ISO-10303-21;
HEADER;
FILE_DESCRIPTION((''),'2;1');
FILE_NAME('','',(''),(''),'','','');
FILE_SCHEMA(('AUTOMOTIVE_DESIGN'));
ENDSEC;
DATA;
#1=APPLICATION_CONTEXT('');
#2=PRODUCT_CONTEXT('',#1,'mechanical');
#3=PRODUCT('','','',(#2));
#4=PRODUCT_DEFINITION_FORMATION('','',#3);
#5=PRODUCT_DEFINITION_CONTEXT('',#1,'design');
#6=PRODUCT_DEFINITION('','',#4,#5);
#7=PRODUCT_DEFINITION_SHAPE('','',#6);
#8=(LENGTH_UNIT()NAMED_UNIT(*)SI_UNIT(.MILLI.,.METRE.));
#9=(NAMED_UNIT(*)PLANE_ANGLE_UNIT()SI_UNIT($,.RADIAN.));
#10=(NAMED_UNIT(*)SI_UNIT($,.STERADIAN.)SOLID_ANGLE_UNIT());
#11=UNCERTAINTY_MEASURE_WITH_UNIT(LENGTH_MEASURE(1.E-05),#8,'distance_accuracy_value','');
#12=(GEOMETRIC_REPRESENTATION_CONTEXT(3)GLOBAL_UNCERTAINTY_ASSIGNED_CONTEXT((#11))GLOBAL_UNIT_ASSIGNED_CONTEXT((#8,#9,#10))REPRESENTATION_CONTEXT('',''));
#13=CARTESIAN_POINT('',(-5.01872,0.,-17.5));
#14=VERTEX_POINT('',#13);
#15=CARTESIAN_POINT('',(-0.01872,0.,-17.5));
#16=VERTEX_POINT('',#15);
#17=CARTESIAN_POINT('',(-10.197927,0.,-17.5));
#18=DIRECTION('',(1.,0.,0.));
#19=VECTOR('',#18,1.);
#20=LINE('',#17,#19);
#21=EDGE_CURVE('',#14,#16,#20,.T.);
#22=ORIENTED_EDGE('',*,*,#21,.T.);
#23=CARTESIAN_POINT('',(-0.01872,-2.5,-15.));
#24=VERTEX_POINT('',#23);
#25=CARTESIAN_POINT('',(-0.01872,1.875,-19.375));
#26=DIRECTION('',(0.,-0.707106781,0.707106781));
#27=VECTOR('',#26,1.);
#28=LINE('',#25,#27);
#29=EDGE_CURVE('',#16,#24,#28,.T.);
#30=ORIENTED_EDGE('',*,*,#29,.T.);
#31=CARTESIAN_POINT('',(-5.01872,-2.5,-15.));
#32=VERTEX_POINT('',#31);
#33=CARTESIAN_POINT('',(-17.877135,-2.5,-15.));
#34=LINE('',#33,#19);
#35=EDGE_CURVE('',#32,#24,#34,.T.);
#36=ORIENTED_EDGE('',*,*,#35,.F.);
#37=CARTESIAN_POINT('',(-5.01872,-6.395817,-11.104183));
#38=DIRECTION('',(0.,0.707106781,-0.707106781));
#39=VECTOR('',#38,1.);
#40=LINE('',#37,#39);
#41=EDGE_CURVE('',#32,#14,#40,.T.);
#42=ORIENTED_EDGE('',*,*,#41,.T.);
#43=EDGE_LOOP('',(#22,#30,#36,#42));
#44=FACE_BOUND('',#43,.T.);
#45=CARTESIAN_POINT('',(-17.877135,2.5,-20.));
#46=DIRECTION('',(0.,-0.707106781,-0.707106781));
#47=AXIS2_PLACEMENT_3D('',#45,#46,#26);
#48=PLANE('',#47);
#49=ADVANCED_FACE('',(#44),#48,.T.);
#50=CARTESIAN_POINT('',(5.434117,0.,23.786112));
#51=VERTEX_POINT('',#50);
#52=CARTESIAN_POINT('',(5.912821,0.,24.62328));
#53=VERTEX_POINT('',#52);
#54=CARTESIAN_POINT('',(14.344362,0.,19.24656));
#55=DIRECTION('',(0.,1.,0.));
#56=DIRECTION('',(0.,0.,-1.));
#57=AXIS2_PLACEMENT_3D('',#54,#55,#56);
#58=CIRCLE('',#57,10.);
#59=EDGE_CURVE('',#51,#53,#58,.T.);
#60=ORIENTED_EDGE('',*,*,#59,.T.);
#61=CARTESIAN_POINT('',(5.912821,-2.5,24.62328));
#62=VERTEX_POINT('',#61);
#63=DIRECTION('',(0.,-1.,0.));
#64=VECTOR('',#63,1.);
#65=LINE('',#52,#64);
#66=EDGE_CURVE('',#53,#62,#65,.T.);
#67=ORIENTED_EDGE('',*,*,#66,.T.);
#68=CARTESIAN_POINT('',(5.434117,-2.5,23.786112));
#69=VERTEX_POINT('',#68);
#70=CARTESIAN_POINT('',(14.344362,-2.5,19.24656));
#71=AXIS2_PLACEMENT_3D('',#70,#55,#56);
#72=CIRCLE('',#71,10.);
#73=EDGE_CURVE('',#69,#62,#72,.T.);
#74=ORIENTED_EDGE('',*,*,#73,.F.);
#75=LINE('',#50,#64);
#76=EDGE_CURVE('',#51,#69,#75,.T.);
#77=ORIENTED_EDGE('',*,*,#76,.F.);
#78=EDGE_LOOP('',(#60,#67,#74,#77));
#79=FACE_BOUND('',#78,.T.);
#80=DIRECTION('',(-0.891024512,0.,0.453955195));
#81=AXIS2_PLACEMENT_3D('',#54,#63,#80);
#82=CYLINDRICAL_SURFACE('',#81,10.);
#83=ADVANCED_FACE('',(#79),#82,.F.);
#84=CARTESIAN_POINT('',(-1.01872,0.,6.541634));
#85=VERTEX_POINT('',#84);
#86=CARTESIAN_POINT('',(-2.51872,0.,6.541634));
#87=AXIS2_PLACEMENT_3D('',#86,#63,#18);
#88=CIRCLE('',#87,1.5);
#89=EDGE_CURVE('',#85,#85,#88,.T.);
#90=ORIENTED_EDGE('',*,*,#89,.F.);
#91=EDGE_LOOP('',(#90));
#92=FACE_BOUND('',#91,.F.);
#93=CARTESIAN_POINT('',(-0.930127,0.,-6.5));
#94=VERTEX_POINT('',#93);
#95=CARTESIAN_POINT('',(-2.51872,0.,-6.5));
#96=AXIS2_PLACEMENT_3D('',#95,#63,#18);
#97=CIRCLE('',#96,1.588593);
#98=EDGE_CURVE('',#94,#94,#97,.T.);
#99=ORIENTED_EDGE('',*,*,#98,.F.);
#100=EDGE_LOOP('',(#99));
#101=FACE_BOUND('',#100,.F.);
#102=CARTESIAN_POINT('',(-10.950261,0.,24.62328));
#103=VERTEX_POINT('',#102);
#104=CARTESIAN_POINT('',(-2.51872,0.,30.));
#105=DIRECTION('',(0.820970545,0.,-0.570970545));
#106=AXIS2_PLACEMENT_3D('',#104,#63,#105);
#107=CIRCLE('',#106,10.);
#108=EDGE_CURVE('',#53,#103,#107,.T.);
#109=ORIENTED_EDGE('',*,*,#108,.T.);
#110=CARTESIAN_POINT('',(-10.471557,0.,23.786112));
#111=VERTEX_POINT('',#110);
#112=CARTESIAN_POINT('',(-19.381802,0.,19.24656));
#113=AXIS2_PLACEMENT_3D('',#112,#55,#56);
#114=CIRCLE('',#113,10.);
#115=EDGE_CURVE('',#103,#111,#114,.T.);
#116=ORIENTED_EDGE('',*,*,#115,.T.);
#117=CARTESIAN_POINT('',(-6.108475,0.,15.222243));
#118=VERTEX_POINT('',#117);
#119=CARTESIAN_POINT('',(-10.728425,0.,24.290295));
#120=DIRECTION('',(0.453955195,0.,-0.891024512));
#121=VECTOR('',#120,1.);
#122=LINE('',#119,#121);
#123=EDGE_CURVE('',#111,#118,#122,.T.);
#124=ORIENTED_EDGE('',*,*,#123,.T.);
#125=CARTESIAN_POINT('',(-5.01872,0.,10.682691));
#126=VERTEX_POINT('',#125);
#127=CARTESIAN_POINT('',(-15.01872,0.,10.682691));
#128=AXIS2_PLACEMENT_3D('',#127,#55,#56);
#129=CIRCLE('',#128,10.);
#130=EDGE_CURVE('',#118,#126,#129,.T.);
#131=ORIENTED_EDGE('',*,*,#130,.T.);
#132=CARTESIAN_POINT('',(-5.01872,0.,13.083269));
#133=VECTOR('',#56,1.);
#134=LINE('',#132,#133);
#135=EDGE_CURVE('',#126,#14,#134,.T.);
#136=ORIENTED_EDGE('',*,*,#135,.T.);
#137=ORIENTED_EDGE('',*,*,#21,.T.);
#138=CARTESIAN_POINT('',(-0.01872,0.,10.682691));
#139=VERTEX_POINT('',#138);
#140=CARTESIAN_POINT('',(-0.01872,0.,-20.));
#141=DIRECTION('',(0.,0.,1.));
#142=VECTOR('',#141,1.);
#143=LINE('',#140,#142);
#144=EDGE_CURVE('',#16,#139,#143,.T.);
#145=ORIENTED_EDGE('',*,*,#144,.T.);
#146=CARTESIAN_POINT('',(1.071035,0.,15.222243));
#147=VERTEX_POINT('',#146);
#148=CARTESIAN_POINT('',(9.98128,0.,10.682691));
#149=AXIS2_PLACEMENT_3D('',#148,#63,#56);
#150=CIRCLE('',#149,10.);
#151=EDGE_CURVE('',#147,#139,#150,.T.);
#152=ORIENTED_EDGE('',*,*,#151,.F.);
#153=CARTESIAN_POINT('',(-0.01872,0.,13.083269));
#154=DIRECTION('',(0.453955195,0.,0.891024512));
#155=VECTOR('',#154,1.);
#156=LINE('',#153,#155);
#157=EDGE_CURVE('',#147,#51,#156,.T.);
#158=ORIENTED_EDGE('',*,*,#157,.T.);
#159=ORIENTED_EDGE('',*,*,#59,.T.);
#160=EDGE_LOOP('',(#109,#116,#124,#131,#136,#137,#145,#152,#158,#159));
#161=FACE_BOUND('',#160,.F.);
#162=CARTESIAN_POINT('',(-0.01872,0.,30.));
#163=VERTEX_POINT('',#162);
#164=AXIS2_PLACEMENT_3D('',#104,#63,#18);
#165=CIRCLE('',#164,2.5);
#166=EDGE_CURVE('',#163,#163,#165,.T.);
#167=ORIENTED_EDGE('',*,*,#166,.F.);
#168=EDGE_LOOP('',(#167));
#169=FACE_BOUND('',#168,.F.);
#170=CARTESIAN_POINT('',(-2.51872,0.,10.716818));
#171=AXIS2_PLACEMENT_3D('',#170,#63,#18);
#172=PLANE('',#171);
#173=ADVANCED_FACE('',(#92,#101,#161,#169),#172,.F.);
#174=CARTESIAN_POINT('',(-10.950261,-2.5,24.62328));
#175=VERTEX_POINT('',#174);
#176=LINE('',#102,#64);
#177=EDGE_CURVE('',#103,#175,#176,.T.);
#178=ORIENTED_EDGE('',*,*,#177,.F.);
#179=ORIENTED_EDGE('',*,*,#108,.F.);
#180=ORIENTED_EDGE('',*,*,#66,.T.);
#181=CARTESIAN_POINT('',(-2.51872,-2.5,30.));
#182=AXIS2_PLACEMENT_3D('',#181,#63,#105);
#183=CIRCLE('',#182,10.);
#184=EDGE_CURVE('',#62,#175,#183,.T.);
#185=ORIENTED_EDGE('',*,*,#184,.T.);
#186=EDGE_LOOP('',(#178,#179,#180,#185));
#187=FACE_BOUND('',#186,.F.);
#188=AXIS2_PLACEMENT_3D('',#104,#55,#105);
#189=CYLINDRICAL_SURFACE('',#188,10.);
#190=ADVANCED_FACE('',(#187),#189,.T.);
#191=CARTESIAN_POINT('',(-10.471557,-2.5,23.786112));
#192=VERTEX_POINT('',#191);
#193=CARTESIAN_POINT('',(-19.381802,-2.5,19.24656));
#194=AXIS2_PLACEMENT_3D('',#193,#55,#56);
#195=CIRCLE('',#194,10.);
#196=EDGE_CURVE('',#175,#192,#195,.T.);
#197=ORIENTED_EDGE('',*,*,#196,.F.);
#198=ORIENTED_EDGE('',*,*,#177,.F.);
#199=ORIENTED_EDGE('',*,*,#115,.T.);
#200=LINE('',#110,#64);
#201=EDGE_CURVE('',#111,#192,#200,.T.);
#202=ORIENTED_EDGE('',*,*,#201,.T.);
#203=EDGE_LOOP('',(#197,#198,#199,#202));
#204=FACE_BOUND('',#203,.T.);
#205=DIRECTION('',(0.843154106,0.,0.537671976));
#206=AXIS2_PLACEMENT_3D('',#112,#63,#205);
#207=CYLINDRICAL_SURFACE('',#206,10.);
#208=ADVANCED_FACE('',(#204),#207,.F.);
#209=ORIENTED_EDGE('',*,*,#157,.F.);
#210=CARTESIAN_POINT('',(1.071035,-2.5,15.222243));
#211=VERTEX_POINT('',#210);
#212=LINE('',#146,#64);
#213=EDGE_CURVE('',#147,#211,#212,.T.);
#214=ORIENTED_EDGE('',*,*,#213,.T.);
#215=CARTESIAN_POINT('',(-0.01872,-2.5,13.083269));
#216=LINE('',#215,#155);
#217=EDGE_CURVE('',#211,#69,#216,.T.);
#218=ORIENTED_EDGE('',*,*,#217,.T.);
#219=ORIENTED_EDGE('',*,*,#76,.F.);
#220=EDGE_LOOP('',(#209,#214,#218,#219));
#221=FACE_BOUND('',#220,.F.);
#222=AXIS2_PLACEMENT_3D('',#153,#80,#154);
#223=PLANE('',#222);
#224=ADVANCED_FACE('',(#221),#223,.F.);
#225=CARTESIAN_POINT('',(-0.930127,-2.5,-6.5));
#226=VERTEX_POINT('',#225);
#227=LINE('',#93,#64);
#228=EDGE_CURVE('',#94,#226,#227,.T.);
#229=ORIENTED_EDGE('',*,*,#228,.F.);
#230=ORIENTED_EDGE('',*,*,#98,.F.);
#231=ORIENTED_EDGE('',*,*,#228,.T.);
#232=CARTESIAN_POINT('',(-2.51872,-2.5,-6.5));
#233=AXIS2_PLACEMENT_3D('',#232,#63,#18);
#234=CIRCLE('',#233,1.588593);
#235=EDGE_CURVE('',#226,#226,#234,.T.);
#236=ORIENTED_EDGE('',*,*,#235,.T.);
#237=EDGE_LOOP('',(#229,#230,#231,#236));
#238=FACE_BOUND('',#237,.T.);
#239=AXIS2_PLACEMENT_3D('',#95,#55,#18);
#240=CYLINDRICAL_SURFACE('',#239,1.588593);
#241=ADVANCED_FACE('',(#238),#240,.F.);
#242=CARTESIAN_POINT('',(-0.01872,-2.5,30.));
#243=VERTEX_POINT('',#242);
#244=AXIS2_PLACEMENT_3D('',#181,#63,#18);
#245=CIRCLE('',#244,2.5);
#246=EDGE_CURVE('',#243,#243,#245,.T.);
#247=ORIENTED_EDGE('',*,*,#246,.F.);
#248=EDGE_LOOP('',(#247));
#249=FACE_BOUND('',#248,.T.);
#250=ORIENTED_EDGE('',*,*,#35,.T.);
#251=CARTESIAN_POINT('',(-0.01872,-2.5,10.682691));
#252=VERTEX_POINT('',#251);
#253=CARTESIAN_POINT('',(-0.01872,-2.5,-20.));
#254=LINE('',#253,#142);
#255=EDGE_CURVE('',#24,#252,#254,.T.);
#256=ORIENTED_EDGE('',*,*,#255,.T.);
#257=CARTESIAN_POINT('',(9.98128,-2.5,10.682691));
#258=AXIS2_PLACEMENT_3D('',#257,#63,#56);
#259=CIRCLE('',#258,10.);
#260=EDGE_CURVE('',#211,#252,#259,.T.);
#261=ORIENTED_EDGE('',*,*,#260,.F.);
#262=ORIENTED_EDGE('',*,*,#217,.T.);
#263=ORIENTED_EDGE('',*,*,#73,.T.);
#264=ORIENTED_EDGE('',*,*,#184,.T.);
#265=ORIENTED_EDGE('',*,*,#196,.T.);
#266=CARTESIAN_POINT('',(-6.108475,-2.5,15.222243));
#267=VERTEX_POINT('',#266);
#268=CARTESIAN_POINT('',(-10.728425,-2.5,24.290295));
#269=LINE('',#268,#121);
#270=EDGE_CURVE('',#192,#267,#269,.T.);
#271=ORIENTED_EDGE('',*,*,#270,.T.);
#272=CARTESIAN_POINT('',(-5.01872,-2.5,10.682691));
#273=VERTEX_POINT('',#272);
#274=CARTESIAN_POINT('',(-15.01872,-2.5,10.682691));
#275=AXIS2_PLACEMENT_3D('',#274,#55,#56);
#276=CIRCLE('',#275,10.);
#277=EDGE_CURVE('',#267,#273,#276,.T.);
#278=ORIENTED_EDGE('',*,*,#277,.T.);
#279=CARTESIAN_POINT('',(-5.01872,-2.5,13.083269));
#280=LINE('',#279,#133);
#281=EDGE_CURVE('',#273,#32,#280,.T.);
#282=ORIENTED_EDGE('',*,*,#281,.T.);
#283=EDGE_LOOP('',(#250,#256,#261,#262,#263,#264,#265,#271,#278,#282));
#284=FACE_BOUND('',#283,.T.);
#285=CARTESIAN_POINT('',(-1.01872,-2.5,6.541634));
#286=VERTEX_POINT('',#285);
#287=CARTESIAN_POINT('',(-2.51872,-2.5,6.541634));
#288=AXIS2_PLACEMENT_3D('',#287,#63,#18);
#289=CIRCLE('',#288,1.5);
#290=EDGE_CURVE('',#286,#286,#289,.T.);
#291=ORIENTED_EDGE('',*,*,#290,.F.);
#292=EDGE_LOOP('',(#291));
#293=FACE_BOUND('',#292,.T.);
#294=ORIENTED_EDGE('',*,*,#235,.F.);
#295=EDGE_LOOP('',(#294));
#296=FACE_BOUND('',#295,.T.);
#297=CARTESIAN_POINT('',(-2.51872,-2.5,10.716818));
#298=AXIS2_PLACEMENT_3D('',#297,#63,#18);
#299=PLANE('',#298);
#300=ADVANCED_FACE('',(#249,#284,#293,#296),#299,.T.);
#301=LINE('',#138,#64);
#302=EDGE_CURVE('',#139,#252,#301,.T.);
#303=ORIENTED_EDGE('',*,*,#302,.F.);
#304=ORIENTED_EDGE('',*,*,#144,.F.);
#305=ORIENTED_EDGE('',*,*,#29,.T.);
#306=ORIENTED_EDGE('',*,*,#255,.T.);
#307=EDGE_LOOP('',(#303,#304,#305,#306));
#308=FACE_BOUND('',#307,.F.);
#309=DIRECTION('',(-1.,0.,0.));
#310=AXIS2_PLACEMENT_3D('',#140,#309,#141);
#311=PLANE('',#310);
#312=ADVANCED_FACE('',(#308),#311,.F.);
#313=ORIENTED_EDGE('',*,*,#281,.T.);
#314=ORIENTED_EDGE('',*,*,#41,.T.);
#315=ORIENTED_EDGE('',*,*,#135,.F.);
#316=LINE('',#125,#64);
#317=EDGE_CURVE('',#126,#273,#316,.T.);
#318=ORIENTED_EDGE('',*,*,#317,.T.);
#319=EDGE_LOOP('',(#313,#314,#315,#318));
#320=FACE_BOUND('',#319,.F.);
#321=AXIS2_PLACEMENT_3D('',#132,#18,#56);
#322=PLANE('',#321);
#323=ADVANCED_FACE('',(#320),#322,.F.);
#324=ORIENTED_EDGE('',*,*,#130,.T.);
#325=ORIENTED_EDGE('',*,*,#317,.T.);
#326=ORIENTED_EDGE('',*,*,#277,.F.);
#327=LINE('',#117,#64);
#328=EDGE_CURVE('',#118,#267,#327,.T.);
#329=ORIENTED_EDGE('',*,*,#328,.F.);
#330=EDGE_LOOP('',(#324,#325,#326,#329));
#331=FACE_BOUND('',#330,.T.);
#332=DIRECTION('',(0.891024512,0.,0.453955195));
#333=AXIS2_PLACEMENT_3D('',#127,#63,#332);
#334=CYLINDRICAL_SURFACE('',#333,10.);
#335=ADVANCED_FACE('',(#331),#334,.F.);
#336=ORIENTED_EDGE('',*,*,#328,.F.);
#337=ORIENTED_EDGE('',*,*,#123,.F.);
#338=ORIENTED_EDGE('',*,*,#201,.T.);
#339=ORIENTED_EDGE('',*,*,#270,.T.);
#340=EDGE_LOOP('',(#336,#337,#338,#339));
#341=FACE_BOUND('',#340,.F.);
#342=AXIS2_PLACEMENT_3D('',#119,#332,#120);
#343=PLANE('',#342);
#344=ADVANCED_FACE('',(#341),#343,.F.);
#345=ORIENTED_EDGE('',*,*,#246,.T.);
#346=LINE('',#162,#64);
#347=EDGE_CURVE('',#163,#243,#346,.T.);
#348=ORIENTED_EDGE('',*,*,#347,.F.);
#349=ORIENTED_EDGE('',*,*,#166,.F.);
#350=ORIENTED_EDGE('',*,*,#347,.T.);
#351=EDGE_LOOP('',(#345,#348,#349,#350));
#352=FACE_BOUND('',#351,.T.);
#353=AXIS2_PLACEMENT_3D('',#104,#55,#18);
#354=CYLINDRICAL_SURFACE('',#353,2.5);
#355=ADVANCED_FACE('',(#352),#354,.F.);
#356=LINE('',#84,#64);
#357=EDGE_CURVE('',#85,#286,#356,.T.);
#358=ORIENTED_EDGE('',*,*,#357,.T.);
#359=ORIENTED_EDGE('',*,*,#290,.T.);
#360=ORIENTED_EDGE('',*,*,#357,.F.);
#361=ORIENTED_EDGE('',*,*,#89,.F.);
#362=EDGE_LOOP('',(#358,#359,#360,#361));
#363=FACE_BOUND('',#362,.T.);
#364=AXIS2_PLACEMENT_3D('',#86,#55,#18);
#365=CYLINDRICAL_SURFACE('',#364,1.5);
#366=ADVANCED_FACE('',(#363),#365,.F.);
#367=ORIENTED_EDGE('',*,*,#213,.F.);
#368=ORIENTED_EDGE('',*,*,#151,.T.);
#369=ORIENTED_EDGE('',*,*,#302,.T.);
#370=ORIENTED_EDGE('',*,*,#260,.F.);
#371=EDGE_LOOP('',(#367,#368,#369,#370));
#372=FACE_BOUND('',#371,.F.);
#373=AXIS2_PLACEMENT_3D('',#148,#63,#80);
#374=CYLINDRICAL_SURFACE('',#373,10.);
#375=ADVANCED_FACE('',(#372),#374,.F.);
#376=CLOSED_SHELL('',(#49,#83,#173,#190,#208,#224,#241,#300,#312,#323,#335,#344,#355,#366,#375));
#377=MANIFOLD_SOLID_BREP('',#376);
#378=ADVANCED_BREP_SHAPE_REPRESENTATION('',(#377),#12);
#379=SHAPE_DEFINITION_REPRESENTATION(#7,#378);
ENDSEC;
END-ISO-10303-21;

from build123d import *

# Parameters (mm, degrees)
F0_R        = 1.5
F0_R_2      = 1.5885930288
F0_R_3      = 2.5
F1_DEPTH    = 2.5
F2_T1_DEPTH = 30.7168298797
F3_R        = 10


# Not quite as in the source:
# - a fillet or chamfer that OpenCascade refuses, or shapes differently, is made with other operations: its cross-section is extruded or revolved along the edge and cut away or added


with BuildPart() as f1:
    # F0 (on Front) → F1 (new body)
    with BuildSketch(Plane.XZ):
        with BuildLine():
            Line((-0.0187197208, 13.0832688883), (5.6909857328, 24.2902945465))
            ThreePointArc((5.6909857328, 24.2902945465), (-2.5187197208, 40), (-10.7284251743, 24.2902945465))
            Line((-10.7284251743, 24.2902945465), (-5.0187197208, 13.0832688883))
            Line((-5.0187197208, 13.0832688883), (-5.0187197208, -20))
            Line((-5.0187197208, -20), (-0.0187197208, -20))
            Line((-0.0187197208, -20), (-0.0187197208, 13.0832688883))
        make_face()
        with Locations((-2.5187197208, 6.5416344441)):
            Circle(F0_R, mode=Mode.SUBTRACT)
        with Locations((-2.5187197208, -6.5)):
            Circle(F0_R_2, mode=Mode.SUBTRACT)
        with Locations((-2.5187197208, 30)):
            Circle(F0_R_3, mode=Mode.SUBTRACT)
    extrude(amount=F1_DEPTH)

    # F2: chamfer of 5 on 1 edges, made by hand

    # F2_s2 → F2_t1 (cut)
    with BuildSketch(Plane.YZ.offset(-17.8771346606)):
        Polygon((2.5, -20), (-2.5, -15), (-2.5, -20), align=None)
    extrude(amount=F2_T1_DEPTH, mode=Mode.SUBTRACT)

    # F3
    f3_edges = [f1.edges().sort_by_distance(p)[0] for p in [
        (-0.01872, -1.25, 13.083269),
        (-5.01872, -1.25, 13.083269),
        (5.690986, -1.25, 24.290295),
        (-10.728425, -1.25, 24.290295),
    ]]
    fillet(f3_edges, radius=F3_R)


solid = f1.part
